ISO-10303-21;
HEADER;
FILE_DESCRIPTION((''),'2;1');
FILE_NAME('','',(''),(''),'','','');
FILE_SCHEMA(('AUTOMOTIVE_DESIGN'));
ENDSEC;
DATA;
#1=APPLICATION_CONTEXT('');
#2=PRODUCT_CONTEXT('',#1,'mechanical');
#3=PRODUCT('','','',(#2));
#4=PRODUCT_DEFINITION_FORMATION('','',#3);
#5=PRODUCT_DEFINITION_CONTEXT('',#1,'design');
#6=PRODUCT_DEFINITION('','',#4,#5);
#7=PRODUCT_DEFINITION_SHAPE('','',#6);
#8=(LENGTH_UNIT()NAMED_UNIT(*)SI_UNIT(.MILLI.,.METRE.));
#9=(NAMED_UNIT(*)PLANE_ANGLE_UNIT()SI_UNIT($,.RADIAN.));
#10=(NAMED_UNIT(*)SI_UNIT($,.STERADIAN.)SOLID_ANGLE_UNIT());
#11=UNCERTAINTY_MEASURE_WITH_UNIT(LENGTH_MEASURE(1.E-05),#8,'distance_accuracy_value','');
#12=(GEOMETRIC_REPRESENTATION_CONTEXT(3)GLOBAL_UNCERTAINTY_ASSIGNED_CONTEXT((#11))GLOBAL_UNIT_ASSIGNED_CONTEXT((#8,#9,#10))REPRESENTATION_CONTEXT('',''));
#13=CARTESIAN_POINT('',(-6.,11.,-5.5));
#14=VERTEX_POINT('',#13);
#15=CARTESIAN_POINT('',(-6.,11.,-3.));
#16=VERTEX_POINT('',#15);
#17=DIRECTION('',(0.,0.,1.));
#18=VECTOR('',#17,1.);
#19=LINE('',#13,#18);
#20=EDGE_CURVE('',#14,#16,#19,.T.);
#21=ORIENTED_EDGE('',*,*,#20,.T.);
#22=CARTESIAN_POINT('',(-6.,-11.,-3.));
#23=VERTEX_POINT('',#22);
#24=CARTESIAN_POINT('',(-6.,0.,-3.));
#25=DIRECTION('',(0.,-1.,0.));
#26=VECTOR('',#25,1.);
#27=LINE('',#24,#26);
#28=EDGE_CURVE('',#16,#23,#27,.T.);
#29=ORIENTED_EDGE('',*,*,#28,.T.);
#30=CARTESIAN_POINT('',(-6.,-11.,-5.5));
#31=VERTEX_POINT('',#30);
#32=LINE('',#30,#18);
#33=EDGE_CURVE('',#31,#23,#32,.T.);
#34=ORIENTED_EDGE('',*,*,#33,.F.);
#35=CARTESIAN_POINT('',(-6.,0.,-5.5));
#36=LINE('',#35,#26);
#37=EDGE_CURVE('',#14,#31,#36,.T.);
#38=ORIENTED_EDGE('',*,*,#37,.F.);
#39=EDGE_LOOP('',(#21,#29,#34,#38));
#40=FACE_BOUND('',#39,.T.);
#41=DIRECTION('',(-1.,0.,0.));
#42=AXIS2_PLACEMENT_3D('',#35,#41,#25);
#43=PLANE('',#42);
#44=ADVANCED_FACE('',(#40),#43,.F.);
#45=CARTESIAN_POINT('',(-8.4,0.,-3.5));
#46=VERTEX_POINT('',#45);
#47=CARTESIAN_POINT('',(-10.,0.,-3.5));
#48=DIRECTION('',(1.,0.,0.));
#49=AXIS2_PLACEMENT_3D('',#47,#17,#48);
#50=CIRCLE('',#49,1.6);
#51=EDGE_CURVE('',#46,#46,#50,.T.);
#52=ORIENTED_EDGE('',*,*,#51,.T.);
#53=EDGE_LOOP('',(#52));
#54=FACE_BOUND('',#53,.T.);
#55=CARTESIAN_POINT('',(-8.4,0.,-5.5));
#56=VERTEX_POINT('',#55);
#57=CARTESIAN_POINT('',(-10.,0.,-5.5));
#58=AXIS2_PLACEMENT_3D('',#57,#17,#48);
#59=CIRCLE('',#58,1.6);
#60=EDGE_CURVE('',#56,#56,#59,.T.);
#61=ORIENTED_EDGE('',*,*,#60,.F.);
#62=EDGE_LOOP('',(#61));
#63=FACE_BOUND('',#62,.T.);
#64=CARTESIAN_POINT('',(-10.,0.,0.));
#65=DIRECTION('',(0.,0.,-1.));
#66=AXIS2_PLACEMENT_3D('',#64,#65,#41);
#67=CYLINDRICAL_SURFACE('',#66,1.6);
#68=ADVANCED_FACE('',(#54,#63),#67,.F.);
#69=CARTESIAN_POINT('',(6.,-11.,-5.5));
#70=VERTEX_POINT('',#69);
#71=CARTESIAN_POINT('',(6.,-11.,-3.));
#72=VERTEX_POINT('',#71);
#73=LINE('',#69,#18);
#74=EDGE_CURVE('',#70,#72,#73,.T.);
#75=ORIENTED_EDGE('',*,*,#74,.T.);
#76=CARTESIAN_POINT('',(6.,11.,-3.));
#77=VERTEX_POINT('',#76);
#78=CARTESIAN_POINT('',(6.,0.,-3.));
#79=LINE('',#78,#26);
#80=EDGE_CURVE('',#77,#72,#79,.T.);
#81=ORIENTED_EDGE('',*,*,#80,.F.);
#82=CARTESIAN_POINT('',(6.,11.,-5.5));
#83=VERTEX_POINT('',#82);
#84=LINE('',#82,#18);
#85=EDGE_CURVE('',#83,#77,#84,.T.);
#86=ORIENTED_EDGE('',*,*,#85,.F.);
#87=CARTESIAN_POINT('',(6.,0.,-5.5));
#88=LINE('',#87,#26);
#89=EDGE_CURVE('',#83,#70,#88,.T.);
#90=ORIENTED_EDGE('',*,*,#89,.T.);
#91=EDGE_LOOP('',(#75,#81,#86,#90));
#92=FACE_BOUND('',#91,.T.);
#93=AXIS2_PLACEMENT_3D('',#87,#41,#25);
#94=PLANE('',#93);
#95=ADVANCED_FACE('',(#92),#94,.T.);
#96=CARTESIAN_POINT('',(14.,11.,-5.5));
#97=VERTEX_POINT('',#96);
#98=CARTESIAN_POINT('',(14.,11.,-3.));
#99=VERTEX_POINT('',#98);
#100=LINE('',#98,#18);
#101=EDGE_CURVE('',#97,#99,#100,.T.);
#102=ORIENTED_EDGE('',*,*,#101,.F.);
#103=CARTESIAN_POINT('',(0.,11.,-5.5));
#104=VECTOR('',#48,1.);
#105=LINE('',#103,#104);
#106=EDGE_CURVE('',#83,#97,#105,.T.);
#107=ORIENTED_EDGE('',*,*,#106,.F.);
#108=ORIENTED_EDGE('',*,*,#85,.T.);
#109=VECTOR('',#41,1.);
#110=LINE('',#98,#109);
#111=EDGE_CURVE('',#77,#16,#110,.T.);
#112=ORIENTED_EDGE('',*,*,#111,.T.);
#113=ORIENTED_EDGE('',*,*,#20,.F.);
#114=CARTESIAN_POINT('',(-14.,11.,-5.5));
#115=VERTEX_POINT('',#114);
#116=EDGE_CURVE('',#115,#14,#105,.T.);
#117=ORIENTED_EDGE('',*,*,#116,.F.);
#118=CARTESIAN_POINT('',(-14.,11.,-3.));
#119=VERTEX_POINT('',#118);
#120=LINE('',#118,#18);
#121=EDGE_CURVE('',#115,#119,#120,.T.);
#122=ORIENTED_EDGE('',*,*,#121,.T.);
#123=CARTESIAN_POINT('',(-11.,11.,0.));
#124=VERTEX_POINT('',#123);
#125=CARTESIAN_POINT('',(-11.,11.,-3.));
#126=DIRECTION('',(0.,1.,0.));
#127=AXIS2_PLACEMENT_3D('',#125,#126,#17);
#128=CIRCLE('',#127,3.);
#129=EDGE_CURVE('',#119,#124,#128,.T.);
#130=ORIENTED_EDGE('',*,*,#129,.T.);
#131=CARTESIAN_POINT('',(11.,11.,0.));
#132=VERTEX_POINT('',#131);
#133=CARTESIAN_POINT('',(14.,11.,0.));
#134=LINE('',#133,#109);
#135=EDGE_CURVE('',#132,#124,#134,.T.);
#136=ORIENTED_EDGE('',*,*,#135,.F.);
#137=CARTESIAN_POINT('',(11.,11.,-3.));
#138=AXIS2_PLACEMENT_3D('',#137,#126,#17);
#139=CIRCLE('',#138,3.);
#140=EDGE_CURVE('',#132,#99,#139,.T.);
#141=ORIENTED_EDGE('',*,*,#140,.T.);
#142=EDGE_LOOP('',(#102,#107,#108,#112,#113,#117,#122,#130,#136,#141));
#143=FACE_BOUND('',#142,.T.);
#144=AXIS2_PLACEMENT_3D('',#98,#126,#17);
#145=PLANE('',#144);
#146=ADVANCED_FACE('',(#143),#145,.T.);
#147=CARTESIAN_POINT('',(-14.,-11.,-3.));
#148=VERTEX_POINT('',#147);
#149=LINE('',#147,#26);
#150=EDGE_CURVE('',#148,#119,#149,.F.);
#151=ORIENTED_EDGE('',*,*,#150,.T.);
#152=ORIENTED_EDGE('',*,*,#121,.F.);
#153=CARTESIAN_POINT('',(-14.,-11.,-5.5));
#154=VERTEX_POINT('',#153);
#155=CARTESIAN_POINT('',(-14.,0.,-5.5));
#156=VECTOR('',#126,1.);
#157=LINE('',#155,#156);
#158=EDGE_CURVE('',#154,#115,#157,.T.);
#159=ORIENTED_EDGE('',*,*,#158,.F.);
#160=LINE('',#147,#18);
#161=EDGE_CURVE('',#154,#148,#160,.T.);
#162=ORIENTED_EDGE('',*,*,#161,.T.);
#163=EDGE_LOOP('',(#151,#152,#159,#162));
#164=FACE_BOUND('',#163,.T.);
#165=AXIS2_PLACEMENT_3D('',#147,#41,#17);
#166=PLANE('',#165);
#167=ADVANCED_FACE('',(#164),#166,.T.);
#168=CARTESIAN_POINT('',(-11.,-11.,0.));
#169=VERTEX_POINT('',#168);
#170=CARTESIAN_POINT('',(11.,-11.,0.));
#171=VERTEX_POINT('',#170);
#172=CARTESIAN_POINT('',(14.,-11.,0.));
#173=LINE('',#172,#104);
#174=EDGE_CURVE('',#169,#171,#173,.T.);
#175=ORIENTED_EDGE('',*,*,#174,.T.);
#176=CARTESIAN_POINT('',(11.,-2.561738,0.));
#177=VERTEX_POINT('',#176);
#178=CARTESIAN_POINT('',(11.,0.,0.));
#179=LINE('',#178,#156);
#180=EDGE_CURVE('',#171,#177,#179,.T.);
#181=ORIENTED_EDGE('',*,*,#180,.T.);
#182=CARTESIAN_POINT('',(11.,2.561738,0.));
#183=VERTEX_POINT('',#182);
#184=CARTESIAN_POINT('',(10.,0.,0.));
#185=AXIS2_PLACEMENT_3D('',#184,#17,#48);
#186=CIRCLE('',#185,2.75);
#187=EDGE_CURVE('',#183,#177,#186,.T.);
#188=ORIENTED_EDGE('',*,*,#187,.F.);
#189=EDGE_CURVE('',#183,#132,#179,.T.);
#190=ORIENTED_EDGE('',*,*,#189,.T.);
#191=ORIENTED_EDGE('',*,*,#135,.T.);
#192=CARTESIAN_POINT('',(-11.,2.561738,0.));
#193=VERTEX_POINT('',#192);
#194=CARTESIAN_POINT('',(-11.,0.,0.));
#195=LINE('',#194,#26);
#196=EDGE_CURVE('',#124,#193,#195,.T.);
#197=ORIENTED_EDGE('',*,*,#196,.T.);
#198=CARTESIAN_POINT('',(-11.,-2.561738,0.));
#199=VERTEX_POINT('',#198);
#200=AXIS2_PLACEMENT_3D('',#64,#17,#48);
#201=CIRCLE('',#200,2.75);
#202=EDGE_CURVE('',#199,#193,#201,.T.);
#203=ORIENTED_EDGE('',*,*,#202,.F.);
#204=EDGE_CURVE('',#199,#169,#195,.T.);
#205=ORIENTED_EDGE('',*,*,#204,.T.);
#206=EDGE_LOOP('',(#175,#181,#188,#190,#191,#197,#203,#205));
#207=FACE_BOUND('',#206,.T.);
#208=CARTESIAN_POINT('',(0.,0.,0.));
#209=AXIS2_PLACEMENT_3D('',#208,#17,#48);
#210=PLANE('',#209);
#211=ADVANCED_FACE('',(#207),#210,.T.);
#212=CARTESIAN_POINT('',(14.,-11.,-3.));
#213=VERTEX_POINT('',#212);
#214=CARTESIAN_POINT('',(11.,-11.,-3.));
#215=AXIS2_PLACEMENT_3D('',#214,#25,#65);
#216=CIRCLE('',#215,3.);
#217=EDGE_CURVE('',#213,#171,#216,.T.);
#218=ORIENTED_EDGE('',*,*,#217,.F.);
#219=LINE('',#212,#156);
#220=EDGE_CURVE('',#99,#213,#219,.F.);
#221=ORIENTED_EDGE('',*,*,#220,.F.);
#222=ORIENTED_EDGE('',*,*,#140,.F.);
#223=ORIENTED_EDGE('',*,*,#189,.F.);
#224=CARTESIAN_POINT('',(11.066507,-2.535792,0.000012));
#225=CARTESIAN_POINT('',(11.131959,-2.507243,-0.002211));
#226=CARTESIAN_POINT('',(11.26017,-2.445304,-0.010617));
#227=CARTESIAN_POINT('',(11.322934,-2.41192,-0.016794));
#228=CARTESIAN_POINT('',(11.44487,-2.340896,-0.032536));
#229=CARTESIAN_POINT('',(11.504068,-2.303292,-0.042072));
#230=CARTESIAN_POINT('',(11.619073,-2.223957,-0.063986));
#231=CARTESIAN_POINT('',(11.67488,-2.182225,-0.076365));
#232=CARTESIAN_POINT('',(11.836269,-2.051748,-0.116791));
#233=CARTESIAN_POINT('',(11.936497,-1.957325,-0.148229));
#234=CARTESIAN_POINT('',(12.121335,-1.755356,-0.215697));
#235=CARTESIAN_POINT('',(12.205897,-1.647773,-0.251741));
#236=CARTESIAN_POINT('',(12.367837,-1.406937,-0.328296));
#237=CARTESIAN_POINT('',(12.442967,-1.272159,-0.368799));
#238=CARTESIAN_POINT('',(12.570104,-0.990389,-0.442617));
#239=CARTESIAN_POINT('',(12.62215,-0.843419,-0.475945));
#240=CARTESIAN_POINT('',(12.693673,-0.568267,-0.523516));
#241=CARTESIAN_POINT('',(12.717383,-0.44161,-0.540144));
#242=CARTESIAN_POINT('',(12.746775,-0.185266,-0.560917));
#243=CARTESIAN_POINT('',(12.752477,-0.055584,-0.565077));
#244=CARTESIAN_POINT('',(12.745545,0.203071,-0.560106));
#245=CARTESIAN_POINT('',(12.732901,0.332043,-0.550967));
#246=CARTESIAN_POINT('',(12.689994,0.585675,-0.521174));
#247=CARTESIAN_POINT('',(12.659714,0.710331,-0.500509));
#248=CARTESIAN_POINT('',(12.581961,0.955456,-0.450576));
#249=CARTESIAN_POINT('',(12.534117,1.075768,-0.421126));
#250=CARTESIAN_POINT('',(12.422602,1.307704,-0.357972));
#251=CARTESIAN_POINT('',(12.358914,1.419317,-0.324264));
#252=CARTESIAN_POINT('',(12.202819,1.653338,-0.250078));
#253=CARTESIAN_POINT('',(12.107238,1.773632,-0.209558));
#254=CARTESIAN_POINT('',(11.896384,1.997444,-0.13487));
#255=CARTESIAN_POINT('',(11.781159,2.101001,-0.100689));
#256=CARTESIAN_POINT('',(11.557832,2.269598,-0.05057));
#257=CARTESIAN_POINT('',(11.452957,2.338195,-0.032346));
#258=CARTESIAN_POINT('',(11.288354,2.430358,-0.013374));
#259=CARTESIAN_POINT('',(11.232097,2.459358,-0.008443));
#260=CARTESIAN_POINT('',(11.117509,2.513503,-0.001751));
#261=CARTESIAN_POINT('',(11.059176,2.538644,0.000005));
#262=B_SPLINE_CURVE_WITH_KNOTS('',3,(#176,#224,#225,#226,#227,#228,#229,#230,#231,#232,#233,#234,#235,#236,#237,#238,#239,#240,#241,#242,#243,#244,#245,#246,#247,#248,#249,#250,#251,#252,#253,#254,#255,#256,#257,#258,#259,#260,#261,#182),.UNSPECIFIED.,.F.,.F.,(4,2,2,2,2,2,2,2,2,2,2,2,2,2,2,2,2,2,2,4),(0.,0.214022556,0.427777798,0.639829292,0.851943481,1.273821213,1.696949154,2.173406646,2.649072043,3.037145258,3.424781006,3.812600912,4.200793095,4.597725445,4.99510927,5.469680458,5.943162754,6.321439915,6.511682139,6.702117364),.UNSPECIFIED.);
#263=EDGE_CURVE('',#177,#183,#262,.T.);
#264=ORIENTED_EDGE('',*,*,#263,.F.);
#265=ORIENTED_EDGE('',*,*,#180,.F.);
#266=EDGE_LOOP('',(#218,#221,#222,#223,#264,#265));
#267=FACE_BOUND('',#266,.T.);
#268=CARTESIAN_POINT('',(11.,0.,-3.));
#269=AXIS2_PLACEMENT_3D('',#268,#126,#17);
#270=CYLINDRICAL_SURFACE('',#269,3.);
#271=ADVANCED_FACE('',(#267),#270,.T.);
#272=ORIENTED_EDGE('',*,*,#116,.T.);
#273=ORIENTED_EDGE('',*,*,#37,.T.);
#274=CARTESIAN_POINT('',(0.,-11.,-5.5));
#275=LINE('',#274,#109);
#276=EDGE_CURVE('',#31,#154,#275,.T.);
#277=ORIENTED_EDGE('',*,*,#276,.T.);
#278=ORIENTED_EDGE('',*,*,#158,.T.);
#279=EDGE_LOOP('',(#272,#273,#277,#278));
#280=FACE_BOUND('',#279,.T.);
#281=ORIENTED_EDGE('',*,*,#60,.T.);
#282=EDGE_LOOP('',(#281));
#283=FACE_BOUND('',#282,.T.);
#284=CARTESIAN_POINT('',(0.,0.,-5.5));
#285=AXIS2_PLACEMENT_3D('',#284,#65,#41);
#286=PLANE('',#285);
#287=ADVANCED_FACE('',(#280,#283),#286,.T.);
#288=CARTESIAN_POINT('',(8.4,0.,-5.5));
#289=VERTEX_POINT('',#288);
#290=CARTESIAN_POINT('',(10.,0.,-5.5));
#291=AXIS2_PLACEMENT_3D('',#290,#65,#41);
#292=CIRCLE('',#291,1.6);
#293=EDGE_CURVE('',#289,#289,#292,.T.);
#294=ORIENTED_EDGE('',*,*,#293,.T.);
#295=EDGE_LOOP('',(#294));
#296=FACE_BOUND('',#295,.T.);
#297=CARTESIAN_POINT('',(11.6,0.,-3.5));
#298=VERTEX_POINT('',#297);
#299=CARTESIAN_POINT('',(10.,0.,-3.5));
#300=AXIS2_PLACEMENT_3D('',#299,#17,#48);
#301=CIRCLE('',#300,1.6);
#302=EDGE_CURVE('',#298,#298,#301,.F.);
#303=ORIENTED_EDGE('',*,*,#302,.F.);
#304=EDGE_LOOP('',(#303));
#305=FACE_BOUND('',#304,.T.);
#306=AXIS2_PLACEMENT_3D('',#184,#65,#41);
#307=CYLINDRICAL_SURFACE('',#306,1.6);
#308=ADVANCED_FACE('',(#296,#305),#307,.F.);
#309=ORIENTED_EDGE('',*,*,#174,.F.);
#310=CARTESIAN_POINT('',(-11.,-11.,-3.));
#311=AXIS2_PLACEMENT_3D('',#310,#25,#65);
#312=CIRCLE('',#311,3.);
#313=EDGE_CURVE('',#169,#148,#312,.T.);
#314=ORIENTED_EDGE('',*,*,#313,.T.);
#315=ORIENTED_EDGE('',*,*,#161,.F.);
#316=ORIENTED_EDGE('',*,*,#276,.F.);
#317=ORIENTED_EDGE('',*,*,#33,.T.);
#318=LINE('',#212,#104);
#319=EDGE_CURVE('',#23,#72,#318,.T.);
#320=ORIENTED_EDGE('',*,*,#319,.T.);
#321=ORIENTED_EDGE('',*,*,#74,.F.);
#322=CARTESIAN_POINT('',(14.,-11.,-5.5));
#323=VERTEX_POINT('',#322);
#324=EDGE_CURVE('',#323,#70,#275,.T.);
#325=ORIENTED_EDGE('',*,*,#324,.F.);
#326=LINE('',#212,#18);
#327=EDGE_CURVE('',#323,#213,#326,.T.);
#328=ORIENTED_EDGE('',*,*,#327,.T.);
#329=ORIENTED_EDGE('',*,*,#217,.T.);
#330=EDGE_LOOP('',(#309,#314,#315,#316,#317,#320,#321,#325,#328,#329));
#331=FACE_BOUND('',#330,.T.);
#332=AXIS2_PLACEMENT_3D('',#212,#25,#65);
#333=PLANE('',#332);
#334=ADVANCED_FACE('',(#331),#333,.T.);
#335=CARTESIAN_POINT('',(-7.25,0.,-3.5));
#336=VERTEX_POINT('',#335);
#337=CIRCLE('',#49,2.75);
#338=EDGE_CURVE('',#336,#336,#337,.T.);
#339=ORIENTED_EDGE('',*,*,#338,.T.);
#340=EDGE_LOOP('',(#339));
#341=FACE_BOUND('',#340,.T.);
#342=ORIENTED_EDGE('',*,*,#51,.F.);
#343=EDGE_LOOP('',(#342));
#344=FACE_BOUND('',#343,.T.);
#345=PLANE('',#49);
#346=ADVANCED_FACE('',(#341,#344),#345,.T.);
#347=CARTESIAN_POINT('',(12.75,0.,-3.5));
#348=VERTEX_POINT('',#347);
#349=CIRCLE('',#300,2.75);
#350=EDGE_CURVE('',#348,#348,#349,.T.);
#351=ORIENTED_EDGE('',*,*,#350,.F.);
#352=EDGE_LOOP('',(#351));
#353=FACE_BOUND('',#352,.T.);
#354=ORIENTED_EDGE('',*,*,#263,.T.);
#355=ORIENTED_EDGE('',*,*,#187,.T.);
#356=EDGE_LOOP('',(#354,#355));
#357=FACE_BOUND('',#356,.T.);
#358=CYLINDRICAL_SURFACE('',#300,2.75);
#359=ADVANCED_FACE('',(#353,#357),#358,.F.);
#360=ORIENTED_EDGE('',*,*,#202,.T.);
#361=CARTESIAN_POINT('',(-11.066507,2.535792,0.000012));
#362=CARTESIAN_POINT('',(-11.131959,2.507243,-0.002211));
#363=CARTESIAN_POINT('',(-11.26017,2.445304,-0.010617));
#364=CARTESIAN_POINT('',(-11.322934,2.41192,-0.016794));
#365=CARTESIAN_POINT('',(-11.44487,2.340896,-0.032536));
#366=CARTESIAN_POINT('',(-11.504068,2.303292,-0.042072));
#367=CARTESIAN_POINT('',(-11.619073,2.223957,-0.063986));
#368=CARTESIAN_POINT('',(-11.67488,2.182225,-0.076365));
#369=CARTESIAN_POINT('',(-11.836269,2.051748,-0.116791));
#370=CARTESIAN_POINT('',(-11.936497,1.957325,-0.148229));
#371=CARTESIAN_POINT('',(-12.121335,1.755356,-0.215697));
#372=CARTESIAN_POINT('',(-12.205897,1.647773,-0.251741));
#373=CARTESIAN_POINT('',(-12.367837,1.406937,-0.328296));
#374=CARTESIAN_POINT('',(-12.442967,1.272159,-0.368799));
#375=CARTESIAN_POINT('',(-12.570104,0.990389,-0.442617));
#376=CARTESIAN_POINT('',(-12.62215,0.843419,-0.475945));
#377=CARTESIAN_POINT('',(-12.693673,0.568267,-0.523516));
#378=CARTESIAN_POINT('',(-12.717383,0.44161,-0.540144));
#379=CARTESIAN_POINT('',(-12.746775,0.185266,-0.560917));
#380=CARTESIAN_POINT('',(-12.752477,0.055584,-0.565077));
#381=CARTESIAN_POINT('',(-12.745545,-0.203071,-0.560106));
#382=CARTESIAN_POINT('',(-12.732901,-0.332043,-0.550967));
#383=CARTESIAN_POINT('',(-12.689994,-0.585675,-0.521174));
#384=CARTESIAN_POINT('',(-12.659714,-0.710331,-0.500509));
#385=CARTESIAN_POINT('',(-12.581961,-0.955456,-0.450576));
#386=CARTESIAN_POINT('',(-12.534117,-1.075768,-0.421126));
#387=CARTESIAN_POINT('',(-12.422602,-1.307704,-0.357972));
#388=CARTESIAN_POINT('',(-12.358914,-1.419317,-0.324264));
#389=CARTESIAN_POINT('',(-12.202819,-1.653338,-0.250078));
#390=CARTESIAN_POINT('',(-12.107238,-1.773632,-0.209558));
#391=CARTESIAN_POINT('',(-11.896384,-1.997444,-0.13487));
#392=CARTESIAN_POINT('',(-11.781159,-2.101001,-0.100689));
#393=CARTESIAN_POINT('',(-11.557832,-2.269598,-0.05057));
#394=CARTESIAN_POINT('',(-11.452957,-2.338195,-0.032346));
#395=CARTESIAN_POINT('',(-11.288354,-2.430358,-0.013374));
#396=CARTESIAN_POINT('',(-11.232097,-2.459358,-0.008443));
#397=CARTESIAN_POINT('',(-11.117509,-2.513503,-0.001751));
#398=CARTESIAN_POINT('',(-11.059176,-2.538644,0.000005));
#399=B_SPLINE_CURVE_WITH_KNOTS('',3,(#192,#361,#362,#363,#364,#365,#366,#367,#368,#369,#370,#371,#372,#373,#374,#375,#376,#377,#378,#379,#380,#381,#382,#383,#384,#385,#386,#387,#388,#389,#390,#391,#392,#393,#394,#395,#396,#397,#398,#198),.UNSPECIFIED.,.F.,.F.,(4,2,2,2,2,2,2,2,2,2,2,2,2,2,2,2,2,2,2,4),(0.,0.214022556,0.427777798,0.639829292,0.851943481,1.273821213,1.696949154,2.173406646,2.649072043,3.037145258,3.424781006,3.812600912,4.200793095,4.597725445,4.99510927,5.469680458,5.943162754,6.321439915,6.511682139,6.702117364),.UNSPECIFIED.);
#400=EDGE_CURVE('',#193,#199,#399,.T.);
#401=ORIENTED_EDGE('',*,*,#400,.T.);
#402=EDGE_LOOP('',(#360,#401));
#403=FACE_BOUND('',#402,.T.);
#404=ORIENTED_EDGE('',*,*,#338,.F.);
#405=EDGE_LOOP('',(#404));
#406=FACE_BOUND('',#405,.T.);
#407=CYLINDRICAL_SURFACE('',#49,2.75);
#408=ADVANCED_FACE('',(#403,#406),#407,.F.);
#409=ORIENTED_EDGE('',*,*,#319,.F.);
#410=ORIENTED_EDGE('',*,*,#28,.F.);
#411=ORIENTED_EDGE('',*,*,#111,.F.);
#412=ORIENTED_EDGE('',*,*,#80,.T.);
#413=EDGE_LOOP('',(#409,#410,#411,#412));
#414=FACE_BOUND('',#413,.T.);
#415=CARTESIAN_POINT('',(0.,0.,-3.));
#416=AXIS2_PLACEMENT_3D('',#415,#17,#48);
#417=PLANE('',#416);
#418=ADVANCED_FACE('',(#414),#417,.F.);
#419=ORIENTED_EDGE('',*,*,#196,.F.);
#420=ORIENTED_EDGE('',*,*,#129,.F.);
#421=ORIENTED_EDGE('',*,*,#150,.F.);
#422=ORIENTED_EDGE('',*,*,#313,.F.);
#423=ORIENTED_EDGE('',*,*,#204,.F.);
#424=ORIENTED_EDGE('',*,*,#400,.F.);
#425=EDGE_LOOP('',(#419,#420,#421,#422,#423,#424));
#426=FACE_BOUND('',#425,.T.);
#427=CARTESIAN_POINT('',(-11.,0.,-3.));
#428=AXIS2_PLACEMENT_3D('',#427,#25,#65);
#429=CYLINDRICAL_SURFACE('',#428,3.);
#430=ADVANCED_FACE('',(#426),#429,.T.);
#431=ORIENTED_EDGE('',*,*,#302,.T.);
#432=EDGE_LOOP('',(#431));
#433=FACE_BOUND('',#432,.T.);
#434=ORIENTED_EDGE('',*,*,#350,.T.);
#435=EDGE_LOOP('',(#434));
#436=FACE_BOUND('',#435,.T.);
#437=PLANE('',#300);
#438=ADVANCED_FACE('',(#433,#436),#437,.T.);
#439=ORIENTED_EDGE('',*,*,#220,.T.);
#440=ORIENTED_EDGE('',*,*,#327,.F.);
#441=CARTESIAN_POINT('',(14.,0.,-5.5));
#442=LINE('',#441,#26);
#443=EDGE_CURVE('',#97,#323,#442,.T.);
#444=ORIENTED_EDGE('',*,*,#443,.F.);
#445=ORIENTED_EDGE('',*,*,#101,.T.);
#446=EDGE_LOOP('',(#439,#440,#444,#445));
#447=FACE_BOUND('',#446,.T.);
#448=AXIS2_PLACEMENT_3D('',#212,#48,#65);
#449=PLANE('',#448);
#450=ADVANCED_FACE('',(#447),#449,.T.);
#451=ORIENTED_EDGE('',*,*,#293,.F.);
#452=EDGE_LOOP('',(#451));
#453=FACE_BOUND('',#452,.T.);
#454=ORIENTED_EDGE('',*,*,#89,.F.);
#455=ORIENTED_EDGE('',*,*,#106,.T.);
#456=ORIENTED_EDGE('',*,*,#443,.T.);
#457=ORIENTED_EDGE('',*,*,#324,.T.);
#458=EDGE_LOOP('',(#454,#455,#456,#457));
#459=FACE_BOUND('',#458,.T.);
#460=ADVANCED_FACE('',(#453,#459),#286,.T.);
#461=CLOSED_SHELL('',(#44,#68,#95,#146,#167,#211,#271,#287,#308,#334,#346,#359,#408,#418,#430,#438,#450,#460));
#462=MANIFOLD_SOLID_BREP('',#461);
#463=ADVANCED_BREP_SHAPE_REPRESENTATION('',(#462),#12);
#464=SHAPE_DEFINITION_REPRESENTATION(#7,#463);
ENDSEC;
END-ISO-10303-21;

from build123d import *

# Parameters (mm, degrees)
SKETCH1_W           = 28
SKETCH1_H           = 22
BOSS_EXTRUDE1_DEPTH = 3
SKETCH2_W           = 8
SKETCH2_H           = 22
BOSS_EXTRUDE2_DEPTH = 2.5
SKETCH3_R           = 1.6
CUT_EXTRUDE1_DEPTH  = 19.634645154
SKETCH4_R           = 2.75
CUT_EXTRUDE2_DEPTH  = 3.5
FILLET1_R           = 3


with BuildPart() as part:
    # Sketch1 → Boss-Extrude1 (new body)
    with BuildSketch(Plane.XY):
        Rectangle(SKETCH1_W, SKETCH1_H)
    extrude(amount=-BOSS_EXTRUDE1_DEPTH)

    # Sketch2 → Boss-Extrude2 (add)
    with BuildSketch(Plane(origin=(0, 0, -3), x_dir=(-1, 0, 0), z_dir=(0, 0, -1))):
        with Locations((10, 0)):
            Rectangle(SKETCH2_W, SKETCH2_H)
        with Locations((-10, 0)):
            Rectangle(SKETCH2_W, SKETCH2_H)
    extrude(amount=BOSS_EXTRUDE2_DEPTH)

    # Sketch3 → Cut-Extrude1 (cut, through all)
    with BuildSketch(Plane(origin=(0, 0, -5.5), x_dir=(-1, 0, 0), z_dir=(0, 0, -1))):
        with Locations((-10, 0)):
            Circle(SKETCH3_R)
        with Locations(Location((10, 0, 0), (0, 0, 180))):
            Circle(SKETCH3_R)
    extrude(amount=-CUT_EXTRUDE1_DEPTH, mode=Mode.SUBTRACT)

    # Sketch4 → Cut-Extrude2 (cut)
    with BuildSketch(Plane.XY):
        with Locations((-10, 0)):
            Circle(SKETCH4_R)
        with Locations((10, 0)):
            Circle(SKETCH4_R)
    extrude(amount=-CUT_EXTRUDE2_DEPTH, mode=Mode.SUBTRACT)

    # Fillet1
    # the kernel refuses this fillet: 3 mm, written as the material it takes off along each edge
    with BuildSketch(Plane(origin=(14, 18.5, 0), x_dir=(0, 0, -1), z_dir=(0, -1, 0)), Plane(origin=(-14, -18.5, 0), x_dir=(0, 0, -1), z_dir=(0, 1, 0))) as fillet1_piece_1:
        with BuildLine():
            CenterArc((FILLET1_R, -FILLET1_R), FILLET1_R, 90, 90)
            Line((0, -FILLET1_R), (0, 0))
            Line((0, 0), (FILLET1_R, 0))
        make_face()
    extrude(amount=37, mode=Mode.SUBTRACT)


solid = part.part
